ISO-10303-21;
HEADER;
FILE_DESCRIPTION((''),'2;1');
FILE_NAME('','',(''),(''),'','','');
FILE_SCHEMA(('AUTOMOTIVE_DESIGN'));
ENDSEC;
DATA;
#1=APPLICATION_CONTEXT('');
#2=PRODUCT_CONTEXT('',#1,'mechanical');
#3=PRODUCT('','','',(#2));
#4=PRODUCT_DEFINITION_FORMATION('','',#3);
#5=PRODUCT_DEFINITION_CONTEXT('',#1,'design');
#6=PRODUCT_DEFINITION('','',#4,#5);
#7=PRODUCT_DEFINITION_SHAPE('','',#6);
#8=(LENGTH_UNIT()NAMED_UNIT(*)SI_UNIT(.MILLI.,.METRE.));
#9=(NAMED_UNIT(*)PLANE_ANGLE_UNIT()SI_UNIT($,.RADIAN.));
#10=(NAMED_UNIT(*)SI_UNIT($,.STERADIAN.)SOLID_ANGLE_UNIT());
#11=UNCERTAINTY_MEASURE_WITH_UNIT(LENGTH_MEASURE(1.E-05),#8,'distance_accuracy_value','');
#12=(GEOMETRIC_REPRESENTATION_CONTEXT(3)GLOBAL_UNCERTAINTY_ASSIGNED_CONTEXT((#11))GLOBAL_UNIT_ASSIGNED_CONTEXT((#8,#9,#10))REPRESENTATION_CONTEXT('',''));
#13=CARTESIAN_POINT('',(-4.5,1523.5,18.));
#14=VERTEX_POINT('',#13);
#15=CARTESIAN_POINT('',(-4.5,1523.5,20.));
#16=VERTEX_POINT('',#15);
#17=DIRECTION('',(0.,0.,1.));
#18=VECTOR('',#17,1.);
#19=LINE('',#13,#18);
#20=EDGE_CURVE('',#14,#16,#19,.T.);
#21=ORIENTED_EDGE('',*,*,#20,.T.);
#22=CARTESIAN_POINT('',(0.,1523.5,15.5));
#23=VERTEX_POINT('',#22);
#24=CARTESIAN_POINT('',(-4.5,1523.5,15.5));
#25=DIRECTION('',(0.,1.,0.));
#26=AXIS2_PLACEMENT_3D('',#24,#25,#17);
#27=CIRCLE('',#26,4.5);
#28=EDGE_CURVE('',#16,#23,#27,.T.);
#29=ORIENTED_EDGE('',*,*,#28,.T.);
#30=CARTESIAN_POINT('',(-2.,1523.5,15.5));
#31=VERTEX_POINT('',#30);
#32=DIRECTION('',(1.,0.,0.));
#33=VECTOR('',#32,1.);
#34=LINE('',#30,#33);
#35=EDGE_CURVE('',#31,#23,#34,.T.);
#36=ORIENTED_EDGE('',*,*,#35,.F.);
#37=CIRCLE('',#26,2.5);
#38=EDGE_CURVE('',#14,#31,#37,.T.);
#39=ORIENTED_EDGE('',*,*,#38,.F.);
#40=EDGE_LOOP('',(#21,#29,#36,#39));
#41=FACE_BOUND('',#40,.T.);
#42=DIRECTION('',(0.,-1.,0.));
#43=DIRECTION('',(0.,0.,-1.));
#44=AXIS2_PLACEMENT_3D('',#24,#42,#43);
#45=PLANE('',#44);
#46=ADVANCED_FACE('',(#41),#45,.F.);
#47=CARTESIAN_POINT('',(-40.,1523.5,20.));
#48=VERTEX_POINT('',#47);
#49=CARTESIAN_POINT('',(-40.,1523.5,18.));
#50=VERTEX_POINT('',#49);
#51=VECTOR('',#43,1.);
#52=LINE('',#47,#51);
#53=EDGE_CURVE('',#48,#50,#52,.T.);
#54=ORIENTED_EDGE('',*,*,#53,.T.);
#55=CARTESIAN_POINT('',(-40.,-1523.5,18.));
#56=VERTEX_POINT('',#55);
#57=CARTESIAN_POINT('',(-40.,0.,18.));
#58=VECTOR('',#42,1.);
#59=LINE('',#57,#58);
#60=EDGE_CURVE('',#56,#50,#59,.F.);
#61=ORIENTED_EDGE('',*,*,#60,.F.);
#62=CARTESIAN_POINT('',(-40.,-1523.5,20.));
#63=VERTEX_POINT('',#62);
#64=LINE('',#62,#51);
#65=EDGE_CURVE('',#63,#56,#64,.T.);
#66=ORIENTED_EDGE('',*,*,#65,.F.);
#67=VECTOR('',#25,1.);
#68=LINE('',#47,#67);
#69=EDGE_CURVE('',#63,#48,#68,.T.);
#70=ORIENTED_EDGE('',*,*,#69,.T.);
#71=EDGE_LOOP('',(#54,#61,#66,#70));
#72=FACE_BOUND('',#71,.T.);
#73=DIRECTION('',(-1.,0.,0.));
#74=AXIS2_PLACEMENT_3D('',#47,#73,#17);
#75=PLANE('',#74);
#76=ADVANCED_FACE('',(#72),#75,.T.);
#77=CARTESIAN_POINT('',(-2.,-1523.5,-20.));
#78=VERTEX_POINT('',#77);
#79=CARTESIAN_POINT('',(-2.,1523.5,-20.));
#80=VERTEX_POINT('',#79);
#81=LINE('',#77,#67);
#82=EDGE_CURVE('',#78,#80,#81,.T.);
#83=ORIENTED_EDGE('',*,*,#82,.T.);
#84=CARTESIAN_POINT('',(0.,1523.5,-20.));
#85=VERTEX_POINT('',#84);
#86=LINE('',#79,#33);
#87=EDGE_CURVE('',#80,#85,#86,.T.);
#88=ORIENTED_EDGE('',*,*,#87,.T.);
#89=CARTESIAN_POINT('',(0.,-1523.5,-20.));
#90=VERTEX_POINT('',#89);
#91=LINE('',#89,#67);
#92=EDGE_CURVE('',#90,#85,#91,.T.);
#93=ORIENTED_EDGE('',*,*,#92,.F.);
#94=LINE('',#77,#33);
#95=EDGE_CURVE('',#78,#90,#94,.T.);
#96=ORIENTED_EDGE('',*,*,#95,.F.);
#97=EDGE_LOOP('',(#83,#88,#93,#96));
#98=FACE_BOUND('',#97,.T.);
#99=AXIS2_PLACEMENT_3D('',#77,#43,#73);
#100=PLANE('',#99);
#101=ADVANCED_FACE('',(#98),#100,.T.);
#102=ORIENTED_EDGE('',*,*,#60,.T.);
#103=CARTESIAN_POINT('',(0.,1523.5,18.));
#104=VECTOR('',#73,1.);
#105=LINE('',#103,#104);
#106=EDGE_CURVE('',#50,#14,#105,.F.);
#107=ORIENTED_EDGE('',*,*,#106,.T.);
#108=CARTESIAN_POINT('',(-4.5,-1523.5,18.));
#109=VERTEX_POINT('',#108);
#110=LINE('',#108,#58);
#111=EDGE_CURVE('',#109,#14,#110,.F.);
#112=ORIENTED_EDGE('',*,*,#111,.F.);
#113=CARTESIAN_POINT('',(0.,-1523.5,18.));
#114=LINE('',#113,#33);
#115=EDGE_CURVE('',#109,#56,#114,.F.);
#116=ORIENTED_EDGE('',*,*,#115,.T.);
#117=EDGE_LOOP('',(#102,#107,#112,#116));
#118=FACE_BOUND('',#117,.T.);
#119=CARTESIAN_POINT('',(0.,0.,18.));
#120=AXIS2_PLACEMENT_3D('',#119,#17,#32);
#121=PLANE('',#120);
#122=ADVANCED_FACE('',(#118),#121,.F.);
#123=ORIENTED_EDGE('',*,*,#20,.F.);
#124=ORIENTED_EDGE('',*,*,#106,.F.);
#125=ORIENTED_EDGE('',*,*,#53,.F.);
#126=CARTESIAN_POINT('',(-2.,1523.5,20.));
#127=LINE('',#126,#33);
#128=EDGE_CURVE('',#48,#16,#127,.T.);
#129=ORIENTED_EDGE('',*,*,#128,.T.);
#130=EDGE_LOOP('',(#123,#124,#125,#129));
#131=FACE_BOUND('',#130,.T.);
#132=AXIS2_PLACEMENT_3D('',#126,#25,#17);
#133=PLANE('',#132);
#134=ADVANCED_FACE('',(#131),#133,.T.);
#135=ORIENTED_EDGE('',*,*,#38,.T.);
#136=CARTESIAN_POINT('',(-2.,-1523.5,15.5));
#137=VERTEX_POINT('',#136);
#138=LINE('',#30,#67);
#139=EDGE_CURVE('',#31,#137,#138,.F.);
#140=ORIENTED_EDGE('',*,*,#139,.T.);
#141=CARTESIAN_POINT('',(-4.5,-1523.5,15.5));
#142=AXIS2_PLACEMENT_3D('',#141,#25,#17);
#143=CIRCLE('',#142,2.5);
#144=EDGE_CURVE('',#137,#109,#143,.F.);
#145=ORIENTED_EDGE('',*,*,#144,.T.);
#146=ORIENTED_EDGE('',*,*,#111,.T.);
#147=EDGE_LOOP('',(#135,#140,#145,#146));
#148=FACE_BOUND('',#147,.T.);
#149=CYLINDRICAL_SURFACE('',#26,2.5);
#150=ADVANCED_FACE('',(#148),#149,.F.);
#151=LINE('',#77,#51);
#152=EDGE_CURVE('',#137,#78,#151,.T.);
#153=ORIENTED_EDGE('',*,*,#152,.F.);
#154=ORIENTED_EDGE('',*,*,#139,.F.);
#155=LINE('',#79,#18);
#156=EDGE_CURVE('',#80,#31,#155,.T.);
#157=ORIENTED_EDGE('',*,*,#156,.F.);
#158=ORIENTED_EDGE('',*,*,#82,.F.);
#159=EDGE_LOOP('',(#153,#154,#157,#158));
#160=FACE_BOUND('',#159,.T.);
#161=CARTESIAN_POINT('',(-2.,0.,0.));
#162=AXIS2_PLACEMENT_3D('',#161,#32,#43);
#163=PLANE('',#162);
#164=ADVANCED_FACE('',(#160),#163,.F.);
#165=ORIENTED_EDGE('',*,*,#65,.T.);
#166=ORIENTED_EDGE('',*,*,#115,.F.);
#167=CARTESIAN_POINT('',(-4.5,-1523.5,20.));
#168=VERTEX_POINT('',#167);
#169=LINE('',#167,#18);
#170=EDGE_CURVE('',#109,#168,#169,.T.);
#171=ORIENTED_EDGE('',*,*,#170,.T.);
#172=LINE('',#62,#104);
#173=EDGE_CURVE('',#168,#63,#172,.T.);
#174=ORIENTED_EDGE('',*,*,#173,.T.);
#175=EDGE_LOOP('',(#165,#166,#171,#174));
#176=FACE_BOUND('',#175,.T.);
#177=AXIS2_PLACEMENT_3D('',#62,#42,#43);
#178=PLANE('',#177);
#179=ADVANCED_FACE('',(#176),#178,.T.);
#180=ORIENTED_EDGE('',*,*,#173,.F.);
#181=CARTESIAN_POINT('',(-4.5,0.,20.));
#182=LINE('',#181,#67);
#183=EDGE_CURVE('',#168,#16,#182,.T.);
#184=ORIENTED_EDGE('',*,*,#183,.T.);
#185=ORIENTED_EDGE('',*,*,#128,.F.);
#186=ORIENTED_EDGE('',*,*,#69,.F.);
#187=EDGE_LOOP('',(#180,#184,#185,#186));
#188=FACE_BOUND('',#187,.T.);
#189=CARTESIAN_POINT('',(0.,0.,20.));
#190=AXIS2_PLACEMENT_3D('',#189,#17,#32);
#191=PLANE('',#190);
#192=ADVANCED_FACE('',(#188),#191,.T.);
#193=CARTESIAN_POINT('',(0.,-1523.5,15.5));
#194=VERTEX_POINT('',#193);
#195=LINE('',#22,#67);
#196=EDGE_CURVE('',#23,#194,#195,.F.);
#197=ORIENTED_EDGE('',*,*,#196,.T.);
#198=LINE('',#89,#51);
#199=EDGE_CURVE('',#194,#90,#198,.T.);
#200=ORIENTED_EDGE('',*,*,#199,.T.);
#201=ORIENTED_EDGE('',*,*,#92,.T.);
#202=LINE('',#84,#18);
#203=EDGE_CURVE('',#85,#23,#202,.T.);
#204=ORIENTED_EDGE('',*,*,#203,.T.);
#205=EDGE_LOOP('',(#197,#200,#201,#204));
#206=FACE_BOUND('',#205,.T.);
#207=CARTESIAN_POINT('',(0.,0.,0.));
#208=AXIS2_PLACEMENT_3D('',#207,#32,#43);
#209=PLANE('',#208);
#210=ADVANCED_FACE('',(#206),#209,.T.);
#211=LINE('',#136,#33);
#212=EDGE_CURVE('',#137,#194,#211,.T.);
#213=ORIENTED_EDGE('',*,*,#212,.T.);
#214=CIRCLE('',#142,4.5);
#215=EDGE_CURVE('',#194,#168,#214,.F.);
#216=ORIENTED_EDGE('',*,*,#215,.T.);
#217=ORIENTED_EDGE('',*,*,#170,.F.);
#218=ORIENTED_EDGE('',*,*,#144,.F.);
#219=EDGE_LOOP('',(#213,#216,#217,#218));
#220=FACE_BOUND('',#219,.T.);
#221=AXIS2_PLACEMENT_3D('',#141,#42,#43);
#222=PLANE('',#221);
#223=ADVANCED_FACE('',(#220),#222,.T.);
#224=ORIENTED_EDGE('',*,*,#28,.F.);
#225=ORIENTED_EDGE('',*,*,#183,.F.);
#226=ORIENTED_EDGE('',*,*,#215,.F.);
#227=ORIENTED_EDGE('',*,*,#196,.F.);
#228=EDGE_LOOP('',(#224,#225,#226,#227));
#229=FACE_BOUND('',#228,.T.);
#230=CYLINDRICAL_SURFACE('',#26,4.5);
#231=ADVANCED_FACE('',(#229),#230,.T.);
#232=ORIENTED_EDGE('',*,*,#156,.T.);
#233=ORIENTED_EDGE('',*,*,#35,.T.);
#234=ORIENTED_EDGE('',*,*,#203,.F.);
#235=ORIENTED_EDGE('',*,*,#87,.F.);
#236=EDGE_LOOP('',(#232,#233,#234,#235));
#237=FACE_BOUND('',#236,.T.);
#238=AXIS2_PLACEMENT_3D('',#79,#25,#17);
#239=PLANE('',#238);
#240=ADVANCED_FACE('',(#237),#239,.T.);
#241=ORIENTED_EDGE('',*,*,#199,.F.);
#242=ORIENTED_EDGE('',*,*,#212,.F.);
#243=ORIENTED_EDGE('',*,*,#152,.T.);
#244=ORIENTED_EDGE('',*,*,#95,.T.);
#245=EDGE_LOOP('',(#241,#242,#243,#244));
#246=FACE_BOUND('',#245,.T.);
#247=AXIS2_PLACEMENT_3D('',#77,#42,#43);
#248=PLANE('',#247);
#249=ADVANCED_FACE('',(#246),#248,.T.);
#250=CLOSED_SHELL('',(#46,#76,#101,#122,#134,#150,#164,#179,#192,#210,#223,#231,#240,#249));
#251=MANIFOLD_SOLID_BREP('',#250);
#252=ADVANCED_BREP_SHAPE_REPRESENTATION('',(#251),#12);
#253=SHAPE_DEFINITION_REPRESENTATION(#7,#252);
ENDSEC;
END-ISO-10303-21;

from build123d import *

# Parameters (mm, degrees)
SKETCH1_W                    = 40
SKETCH1_H                    = 3047
BASE_FLANGE1_DEPTH           = 2
EDGE_FLANGE1_STRIP_W         = 13
EDGE_FLANGE1_STRIP_H         = 2
EDGE_FLANGE1_STRIP_CUT_DEPTH = 3047
EDGE_FLANGE1_DEPTH           = 3047


# Sheet-metal steps are written as plain solids
with BuildPart() as part:
    # Sketch1 → Base-Flange1 (new body)
    with BuildSketch(Plane(origin=(0, 0, 0), x_dir=(0, 0, -1), z_dir=(1, 0, 0))):
        Rectangle(SKETCH1_W, SKETCH1_H)
    extrude(amount=-BASE_FLANGE1_DEPTH)

    # Edge-Flange1 strip (across the edge) → Edge-Flange1 strip cut (cut)
    with BuildSketch(Plane(origin=(-2, -1523.5, 20), x_dir=(0, 0, -1), z_dir=(0, 1, 0))):
        with Locations((-2, -1)):
            Rectangle(EDGE_FLANGE1_STRIP_W, EDGE_FLANGE1_STRIP_H)
    extrude(amount=EDGE_FLANGE1_STRIP_CUT_DEPTH, mode=Mode.SUBTRACT)

    # Edge-Flange1 section (across the edge) → Edge-Flange1 (add)
    with BuildSketch(Plane(origin=(-2, -1523.5, 20), x_dir=(0, 0, -1), z_dir=(0, 1, 0))):
        with BuildLine():
            Line((0, 2.5), (0, 38))
            Line((0, 38), (2, 38))
            Line((2, 38), (2, 2.5))
            ThreePointArc((2, 2.5), (2.732233047, 0.732233047), (4.5, 0))
            Line((4.5, 0), (4.5, -2))
            ThreePointArc((4.5, -2), (1.318019485, -0.681980515), (0, 2.5))
        make_face()
    extrude(amount=EDGE_FLANGE1_DEPTH)


solid = part.part
